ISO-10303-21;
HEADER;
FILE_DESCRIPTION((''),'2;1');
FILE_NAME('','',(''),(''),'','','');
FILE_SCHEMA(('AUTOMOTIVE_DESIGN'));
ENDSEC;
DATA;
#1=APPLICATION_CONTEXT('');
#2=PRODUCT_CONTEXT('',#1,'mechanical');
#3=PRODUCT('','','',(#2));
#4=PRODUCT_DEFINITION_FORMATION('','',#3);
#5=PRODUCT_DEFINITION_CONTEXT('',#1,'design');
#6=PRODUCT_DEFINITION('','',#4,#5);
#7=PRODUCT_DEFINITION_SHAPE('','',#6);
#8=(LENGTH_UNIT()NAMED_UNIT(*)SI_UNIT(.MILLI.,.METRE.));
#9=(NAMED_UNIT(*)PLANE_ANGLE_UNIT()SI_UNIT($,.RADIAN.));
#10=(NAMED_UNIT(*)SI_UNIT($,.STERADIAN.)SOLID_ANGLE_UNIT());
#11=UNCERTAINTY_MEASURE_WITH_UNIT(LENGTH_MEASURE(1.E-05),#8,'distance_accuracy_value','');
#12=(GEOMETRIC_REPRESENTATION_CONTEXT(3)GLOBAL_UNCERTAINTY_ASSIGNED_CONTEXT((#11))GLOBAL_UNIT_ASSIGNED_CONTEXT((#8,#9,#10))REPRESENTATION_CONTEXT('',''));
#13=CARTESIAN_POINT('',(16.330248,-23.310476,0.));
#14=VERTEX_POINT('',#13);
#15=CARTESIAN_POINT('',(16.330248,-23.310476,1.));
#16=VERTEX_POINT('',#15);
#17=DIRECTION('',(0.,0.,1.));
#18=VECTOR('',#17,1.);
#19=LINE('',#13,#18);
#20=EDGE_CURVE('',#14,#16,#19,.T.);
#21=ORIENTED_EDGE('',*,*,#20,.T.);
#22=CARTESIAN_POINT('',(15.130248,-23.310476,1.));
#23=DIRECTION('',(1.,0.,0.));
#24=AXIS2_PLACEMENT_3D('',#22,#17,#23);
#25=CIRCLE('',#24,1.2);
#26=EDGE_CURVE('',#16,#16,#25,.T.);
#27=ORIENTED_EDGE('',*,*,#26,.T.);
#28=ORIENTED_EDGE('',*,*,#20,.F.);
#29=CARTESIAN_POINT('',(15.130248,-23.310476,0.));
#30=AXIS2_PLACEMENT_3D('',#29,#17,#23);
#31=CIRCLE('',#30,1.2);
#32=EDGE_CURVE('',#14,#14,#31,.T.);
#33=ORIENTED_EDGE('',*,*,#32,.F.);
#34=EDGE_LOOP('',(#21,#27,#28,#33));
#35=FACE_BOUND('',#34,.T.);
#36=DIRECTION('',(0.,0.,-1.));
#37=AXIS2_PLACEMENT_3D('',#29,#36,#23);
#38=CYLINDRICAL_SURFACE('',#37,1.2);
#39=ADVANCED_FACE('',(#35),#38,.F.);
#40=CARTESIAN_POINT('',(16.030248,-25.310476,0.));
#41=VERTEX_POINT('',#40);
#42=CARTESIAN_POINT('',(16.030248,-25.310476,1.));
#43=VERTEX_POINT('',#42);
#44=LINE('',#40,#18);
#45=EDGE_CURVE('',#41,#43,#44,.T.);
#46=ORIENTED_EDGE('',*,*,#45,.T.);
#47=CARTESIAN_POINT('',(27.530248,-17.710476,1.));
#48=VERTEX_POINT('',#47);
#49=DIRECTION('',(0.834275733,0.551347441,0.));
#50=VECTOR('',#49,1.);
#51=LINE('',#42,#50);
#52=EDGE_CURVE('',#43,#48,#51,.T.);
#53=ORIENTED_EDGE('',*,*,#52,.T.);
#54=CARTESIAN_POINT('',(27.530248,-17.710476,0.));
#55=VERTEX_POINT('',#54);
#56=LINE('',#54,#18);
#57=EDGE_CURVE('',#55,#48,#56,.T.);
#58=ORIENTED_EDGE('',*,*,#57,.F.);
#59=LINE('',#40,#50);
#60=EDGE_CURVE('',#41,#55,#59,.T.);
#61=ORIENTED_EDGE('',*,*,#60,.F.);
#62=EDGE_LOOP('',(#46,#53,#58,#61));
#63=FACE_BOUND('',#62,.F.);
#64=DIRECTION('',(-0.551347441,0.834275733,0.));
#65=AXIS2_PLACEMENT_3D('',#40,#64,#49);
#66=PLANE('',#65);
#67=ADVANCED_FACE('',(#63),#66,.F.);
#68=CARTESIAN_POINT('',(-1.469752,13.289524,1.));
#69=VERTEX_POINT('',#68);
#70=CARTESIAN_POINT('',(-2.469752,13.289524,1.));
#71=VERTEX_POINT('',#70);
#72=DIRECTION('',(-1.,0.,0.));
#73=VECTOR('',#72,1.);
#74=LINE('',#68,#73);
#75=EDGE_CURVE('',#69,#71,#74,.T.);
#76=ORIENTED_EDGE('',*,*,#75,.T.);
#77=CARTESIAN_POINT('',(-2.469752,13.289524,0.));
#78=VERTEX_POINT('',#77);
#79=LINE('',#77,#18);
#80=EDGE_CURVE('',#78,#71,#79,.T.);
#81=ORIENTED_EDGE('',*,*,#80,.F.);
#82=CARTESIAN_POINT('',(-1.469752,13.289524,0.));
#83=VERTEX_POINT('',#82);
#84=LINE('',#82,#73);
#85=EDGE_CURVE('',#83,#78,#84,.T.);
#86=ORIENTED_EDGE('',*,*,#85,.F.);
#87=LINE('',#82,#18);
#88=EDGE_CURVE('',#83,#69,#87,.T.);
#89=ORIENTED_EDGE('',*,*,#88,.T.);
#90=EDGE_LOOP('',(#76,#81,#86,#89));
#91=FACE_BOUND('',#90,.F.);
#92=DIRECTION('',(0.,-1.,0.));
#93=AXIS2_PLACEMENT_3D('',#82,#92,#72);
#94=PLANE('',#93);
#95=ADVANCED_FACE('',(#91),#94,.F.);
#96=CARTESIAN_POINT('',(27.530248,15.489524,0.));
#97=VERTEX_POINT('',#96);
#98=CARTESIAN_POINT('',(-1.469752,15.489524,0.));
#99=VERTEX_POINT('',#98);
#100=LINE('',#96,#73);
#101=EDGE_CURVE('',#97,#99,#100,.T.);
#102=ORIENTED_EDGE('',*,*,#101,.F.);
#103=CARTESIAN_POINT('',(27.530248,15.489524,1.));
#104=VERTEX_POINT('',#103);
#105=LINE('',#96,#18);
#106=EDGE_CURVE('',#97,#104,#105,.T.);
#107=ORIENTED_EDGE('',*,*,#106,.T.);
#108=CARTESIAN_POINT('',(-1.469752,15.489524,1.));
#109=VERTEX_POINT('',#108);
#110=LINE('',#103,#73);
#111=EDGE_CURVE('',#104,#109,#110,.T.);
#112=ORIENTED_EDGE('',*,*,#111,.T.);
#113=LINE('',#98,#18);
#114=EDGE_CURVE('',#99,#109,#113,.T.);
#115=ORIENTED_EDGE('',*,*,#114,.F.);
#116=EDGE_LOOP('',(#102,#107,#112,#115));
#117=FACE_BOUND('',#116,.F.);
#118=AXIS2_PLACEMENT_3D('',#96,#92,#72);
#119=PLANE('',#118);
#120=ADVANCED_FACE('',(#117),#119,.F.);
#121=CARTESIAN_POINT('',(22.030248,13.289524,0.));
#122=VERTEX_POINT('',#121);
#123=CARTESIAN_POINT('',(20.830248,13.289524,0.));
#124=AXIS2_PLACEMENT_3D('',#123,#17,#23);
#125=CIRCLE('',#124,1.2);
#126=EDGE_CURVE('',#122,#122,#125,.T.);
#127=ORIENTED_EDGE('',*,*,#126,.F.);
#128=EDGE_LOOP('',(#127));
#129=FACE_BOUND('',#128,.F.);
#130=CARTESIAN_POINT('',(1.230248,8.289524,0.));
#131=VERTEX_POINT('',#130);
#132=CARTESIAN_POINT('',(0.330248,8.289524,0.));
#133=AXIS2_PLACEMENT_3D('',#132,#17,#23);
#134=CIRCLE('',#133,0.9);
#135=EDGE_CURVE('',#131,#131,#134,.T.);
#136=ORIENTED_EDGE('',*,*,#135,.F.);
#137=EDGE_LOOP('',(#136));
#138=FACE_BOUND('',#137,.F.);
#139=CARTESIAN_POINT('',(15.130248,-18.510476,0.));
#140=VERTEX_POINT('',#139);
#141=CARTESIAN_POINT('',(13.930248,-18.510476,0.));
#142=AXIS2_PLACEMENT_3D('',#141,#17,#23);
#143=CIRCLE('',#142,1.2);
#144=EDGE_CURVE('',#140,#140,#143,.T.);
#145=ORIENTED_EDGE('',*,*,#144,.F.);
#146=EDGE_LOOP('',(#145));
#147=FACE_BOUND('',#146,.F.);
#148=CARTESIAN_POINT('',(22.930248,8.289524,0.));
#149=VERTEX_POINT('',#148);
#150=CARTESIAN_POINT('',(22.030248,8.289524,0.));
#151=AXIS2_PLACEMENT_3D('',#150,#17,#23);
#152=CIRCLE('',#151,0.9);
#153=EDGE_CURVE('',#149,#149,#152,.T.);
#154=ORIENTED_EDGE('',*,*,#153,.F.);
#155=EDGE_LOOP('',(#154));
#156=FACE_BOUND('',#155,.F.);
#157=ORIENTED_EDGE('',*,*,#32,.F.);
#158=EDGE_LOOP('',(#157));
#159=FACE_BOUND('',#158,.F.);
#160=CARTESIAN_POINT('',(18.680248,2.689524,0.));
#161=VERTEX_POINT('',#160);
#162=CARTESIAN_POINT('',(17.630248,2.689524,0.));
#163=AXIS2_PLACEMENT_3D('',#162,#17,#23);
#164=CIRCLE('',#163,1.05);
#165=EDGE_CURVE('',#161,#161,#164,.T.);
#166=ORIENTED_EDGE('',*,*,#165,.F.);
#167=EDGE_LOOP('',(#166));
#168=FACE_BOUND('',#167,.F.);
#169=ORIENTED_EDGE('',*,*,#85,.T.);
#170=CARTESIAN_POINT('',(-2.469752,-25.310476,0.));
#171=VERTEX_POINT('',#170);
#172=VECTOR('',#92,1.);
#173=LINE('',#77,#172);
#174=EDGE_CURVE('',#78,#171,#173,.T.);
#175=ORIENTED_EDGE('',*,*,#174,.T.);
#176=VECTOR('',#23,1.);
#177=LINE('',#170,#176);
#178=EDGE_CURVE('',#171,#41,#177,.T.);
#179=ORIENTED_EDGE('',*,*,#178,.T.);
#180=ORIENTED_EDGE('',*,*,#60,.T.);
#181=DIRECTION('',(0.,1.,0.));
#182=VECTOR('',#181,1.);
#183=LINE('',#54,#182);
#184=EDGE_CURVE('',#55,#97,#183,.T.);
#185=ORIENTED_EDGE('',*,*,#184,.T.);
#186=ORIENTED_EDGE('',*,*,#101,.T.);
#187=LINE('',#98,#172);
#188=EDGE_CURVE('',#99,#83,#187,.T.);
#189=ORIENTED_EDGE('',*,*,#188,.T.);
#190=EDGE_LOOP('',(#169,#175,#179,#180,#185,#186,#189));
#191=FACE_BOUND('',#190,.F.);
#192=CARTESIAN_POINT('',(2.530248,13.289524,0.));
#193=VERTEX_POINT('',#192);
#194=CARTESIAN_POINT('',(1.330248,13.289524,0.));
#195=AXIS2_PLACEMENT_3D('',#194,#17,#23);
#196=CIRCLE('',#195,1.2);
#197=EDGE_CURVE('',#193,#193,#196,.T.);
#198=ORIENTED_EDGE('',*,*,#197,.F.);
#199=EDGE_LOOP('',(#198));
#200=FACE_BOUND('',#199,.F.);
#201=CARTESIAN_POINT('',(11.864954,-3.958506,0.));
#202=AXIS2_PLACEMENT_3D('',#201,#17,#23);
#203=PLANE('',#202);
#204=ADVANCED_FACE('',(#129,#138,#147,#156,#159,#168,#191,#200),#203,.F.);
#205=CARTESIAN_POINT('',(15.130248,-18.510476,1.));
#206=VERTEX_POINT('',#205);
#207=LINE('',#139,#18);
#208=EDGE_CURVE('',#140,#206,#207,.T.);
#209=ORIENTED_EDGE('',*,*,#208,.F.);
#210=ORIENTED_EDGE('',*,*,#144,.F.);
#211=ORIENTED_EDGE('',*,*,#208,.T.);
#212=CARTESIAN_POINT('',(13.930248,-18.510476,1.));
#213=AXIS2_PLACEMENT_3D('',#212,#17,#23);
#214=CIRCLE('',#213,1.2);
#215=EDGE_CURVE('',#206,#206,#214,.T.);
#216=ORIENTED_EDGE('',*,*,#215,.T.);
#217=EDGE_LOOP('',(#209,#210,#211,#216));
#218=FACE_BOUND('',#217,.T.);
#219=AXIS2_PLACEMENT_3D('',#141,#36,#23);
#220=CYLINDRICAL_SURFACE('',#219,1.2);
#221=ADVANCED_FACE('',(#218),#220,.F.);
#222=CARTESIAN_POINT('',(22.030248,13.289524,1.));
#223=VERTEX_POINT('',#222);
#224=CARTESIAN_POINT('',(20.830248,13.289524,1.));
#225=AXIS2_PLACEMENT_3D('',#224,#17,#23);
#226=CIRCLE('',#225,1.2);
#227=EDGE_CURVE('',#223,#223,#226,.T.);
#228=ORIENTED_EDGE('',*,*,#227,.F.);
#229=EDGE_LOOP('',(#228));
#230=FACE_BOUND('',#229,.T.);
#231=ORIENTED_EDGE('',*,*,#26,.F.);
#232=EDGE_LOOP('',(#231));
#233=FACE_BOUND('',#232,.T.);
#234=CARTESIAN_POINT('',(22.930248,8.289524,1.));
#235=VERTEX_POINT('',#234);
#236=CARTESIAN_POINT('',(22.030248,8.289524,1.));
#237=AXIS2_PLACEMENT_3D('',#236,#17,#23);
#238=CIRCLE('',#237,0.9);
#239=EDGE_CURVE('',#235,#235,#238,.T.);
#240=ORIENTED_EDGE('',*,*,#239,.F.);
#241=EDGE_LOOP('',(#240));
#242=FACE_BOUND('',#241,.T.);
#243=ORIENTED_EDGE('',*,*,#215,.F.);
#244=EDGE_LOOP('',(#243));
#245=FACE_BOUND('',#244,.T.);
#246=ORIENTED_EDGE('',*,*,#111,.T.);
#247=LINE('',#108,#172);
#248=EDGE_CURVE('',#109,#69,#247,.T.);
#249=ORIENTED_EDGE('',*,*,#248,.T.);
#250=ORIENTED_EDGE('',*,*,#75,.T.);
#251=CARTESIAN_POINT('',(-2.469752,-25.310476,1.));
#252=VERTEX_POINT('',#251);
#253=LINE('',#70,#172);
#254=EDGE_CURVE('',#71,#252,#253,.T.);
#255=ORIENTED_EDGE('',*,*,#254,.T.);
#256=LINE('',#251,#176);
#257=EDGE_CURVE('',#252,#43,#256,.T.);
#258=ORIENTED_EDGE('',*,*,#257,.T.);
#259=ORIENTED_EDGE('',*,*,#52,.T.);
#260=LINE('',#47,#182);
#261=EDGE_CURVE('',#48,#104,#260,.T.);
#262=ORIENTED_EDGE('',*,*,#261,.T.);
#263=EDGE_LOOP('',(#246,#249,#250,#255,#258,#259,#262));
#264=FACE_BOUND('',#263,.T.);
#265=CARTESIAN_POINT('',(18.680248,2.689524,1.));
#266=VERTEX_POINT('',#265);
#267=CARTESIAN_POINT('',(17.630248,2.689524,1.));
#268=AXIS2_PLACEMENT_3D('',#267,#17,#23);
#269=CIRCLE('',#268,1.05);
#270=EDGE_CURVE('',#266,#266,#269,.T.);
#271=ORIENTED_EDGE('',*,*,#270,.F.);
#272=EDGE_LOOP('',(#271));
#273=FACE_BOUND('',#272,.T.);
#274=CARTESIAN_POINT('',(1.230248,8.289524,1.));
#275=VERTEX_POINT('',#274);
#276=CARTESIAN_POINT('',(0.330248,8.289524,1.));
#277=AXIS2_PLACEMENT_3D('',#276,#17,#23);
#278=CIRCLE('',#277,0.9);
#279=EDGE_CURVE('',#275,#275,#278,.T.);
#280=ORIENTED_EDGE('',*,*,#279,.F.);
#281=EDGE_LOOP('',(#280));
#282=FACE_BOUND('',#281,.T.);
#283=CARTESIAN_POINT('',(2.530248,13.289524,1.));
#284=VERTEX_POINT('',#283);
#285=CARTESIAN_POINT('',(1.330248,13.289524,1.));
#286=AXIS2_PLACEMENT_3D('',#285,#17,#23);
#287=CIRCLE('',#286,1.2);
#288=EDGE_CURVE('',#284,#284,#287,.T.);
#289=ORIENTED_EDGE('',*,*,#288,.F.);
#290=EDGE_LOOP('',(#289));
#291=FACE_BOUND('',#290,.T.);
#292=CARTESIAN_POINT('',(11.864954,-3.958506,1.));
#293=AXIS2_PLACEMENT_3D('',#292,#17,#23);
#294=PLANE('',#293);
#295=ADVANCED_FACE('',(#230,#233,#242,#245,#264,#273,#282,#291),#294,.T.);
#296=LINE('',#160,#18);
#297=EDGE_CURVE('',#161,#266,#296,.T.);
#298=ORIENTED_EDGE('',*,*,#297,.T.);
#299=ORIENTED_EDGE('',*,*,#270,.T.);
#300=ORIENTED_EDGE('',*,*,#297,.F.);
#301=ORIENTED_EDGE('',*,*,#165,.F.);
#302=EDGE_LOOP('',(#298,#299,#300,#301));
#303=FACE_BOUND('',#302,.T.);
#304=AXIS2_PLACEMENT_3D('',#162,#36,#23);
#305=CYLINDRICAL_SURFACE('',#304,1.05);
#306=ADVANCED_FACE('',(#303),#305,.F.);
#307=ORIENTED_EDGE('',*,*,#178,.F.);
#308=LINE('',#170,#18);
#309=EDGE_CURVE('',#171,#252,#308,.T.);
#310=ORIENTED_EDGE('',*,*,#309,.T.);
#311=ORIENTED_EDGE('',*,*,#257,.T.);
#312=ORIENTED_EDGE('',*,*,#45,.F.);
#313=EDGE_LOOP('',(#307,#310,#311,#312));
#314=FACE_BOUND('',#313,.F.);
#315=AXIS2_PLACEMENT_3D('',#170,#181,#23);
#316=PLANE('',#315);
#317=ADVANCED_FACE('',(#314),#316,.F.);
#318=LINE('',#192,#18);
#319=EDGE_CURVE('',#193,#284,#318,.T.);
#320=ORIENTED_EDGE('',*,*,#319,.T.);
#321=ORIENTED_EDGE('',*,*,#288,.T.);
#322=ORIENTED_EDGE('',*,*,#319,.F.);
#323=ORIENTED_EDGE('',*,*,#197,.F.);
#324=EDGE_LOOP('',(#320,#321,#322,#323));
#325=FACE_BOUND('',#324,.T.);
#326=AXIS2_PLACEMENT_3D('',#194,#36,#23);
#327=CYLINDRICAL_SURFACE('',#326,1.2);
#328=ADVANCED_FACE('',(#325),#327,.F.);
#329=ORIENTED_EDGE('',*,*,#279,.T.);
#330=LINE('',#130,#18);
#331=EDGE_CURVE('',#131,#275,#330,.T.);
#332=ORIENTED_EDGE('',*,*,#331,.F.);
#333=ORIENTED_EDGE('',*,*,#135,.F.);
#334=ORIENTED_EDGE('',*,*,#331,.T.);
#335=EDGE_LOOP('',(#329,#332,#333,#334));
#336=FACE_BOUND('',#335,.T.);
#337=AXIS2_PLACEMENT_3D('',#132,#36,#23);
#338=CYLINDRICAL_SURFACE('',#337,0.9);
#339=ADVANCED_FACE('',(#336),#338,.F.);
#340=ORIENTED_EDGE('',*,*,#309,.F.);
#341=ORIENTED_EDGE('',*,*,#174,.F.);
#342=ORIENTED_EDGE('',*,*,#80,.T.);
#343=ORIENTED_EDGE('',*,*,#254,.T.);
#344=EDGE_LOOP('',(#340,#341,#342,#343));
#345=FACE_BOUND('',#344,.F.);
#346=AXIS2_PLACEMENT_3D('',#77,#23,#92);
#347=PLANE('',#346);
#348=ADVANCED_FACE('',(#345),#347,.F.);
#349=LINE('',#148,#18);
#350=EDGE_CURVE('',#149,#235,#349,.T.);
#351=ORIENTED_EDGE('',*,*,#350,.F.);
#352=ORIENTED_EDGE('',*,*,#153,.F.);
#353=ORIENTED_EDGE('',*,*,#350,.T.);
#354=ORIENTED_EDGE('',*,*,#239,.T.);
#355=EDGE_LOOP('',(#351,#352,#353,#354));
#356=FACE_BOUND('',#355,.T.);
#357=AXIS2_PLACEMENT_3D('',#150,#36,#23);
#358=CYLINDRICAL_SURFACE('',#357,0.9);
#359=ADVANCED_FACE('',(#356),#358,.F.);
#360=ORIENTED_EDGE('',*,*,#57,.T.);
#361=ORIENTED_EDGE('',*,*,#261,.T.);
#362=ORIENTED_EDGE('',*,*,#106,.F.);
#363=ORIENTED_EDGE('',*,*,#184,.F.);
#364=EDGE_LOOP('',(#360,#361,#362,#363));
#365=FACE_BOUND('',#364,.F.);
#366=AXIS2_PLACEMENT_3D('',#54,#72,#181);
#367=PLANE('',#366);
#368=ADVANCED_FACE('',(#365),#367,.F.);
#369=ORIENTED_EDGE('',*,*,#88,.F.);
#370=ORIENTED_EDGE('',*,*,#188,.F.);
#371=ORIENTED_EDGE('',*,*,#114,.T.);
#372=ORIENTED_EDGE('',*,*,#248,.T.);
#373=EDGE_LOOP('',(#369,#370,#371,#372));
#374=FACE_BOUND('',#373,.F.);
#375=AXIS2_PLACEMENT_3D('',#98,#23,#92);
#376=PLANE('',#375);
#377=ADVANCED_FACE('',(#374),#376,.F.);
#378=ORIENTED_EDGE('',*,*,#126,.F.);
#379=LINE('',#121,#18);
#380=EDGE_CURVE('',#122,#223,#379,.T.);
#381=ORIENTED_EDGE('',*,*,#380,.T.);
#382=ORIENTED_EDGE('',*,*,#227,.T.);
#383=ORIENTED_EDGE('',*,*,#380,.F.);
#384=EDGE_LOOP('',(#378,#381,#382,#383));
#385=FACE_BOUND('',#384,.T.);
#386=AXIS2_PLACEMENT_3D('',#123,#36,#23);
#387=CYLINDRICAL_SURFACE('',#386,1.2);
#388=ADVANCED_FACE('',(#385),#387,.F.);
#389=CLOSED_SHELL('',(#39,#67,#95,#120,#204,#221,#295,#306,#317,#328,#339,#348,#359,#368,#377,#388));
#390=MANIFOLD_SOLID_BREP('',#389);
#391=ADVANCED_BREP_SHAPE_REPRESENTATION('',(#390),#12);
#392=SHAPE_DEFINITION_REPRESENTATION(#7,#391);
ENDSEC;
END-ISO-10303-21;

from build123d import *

# Parameters (mm, degrees)
F0_R     = 1.2
F0_R_2   = 0.9
F0_R_3   = 1.05
F1_DEPTH = 1


# Not quite as in the source:
# - a feature of the source that left no trace in its solid (it failed there, or was rolled back) is left out


with BuildPart() as f1:
    # F0 (on Top) → F1 (new body)
    with BuildSketch(Plane.XY):
        Polygon((27.5302478731, -17.7104764104), (27.5302478731, 15.4895235896), (-1.4697521269, 15.4895235896), (-1.4697521269, 13.2895235896), (-2.4697521269, 13.2895235896), (-2.4697521269, -22.3104764104), (-2.4697521269, -25.3104764104), (-1.4697521269, -25.3104764104), (16.0302478731, -25.3104764104), align=None)
        with Locations((15.1302478731, -23.3104764104)):
            Circle(F0_R, mode=Mode.SUBTRACT)
        with Locations((13.9302478731, -18.5104764104)):
            Circle(F0_R, mode=Mode.SUBTRACT)
        with Locations((0.3302478731, 8.2895235896)):
            Circle(F0_R_2, mode=Mode.SUBTRACT)
        with Locations((1.3302478731, 13.2895235896)):
            Circle(F0_R, mode=Mode.SUBTRACT)
        with Locations((17.6302478731, 2.6895235896)):
            Circle(F0_R_3, mode=Mode.SUBTRACT)
        with Locations((22.0302478731, 8.2895235896)):
            Circle(F0_R_2, mode=Mode.SUBTRACT)
        with Locations((20.8302478731, 13.2895235896)):
            Circle(F0_R, mode=Mode.SUBTRACT)
    extrude(amount=F1_DEPTH)


solid = f1.part
